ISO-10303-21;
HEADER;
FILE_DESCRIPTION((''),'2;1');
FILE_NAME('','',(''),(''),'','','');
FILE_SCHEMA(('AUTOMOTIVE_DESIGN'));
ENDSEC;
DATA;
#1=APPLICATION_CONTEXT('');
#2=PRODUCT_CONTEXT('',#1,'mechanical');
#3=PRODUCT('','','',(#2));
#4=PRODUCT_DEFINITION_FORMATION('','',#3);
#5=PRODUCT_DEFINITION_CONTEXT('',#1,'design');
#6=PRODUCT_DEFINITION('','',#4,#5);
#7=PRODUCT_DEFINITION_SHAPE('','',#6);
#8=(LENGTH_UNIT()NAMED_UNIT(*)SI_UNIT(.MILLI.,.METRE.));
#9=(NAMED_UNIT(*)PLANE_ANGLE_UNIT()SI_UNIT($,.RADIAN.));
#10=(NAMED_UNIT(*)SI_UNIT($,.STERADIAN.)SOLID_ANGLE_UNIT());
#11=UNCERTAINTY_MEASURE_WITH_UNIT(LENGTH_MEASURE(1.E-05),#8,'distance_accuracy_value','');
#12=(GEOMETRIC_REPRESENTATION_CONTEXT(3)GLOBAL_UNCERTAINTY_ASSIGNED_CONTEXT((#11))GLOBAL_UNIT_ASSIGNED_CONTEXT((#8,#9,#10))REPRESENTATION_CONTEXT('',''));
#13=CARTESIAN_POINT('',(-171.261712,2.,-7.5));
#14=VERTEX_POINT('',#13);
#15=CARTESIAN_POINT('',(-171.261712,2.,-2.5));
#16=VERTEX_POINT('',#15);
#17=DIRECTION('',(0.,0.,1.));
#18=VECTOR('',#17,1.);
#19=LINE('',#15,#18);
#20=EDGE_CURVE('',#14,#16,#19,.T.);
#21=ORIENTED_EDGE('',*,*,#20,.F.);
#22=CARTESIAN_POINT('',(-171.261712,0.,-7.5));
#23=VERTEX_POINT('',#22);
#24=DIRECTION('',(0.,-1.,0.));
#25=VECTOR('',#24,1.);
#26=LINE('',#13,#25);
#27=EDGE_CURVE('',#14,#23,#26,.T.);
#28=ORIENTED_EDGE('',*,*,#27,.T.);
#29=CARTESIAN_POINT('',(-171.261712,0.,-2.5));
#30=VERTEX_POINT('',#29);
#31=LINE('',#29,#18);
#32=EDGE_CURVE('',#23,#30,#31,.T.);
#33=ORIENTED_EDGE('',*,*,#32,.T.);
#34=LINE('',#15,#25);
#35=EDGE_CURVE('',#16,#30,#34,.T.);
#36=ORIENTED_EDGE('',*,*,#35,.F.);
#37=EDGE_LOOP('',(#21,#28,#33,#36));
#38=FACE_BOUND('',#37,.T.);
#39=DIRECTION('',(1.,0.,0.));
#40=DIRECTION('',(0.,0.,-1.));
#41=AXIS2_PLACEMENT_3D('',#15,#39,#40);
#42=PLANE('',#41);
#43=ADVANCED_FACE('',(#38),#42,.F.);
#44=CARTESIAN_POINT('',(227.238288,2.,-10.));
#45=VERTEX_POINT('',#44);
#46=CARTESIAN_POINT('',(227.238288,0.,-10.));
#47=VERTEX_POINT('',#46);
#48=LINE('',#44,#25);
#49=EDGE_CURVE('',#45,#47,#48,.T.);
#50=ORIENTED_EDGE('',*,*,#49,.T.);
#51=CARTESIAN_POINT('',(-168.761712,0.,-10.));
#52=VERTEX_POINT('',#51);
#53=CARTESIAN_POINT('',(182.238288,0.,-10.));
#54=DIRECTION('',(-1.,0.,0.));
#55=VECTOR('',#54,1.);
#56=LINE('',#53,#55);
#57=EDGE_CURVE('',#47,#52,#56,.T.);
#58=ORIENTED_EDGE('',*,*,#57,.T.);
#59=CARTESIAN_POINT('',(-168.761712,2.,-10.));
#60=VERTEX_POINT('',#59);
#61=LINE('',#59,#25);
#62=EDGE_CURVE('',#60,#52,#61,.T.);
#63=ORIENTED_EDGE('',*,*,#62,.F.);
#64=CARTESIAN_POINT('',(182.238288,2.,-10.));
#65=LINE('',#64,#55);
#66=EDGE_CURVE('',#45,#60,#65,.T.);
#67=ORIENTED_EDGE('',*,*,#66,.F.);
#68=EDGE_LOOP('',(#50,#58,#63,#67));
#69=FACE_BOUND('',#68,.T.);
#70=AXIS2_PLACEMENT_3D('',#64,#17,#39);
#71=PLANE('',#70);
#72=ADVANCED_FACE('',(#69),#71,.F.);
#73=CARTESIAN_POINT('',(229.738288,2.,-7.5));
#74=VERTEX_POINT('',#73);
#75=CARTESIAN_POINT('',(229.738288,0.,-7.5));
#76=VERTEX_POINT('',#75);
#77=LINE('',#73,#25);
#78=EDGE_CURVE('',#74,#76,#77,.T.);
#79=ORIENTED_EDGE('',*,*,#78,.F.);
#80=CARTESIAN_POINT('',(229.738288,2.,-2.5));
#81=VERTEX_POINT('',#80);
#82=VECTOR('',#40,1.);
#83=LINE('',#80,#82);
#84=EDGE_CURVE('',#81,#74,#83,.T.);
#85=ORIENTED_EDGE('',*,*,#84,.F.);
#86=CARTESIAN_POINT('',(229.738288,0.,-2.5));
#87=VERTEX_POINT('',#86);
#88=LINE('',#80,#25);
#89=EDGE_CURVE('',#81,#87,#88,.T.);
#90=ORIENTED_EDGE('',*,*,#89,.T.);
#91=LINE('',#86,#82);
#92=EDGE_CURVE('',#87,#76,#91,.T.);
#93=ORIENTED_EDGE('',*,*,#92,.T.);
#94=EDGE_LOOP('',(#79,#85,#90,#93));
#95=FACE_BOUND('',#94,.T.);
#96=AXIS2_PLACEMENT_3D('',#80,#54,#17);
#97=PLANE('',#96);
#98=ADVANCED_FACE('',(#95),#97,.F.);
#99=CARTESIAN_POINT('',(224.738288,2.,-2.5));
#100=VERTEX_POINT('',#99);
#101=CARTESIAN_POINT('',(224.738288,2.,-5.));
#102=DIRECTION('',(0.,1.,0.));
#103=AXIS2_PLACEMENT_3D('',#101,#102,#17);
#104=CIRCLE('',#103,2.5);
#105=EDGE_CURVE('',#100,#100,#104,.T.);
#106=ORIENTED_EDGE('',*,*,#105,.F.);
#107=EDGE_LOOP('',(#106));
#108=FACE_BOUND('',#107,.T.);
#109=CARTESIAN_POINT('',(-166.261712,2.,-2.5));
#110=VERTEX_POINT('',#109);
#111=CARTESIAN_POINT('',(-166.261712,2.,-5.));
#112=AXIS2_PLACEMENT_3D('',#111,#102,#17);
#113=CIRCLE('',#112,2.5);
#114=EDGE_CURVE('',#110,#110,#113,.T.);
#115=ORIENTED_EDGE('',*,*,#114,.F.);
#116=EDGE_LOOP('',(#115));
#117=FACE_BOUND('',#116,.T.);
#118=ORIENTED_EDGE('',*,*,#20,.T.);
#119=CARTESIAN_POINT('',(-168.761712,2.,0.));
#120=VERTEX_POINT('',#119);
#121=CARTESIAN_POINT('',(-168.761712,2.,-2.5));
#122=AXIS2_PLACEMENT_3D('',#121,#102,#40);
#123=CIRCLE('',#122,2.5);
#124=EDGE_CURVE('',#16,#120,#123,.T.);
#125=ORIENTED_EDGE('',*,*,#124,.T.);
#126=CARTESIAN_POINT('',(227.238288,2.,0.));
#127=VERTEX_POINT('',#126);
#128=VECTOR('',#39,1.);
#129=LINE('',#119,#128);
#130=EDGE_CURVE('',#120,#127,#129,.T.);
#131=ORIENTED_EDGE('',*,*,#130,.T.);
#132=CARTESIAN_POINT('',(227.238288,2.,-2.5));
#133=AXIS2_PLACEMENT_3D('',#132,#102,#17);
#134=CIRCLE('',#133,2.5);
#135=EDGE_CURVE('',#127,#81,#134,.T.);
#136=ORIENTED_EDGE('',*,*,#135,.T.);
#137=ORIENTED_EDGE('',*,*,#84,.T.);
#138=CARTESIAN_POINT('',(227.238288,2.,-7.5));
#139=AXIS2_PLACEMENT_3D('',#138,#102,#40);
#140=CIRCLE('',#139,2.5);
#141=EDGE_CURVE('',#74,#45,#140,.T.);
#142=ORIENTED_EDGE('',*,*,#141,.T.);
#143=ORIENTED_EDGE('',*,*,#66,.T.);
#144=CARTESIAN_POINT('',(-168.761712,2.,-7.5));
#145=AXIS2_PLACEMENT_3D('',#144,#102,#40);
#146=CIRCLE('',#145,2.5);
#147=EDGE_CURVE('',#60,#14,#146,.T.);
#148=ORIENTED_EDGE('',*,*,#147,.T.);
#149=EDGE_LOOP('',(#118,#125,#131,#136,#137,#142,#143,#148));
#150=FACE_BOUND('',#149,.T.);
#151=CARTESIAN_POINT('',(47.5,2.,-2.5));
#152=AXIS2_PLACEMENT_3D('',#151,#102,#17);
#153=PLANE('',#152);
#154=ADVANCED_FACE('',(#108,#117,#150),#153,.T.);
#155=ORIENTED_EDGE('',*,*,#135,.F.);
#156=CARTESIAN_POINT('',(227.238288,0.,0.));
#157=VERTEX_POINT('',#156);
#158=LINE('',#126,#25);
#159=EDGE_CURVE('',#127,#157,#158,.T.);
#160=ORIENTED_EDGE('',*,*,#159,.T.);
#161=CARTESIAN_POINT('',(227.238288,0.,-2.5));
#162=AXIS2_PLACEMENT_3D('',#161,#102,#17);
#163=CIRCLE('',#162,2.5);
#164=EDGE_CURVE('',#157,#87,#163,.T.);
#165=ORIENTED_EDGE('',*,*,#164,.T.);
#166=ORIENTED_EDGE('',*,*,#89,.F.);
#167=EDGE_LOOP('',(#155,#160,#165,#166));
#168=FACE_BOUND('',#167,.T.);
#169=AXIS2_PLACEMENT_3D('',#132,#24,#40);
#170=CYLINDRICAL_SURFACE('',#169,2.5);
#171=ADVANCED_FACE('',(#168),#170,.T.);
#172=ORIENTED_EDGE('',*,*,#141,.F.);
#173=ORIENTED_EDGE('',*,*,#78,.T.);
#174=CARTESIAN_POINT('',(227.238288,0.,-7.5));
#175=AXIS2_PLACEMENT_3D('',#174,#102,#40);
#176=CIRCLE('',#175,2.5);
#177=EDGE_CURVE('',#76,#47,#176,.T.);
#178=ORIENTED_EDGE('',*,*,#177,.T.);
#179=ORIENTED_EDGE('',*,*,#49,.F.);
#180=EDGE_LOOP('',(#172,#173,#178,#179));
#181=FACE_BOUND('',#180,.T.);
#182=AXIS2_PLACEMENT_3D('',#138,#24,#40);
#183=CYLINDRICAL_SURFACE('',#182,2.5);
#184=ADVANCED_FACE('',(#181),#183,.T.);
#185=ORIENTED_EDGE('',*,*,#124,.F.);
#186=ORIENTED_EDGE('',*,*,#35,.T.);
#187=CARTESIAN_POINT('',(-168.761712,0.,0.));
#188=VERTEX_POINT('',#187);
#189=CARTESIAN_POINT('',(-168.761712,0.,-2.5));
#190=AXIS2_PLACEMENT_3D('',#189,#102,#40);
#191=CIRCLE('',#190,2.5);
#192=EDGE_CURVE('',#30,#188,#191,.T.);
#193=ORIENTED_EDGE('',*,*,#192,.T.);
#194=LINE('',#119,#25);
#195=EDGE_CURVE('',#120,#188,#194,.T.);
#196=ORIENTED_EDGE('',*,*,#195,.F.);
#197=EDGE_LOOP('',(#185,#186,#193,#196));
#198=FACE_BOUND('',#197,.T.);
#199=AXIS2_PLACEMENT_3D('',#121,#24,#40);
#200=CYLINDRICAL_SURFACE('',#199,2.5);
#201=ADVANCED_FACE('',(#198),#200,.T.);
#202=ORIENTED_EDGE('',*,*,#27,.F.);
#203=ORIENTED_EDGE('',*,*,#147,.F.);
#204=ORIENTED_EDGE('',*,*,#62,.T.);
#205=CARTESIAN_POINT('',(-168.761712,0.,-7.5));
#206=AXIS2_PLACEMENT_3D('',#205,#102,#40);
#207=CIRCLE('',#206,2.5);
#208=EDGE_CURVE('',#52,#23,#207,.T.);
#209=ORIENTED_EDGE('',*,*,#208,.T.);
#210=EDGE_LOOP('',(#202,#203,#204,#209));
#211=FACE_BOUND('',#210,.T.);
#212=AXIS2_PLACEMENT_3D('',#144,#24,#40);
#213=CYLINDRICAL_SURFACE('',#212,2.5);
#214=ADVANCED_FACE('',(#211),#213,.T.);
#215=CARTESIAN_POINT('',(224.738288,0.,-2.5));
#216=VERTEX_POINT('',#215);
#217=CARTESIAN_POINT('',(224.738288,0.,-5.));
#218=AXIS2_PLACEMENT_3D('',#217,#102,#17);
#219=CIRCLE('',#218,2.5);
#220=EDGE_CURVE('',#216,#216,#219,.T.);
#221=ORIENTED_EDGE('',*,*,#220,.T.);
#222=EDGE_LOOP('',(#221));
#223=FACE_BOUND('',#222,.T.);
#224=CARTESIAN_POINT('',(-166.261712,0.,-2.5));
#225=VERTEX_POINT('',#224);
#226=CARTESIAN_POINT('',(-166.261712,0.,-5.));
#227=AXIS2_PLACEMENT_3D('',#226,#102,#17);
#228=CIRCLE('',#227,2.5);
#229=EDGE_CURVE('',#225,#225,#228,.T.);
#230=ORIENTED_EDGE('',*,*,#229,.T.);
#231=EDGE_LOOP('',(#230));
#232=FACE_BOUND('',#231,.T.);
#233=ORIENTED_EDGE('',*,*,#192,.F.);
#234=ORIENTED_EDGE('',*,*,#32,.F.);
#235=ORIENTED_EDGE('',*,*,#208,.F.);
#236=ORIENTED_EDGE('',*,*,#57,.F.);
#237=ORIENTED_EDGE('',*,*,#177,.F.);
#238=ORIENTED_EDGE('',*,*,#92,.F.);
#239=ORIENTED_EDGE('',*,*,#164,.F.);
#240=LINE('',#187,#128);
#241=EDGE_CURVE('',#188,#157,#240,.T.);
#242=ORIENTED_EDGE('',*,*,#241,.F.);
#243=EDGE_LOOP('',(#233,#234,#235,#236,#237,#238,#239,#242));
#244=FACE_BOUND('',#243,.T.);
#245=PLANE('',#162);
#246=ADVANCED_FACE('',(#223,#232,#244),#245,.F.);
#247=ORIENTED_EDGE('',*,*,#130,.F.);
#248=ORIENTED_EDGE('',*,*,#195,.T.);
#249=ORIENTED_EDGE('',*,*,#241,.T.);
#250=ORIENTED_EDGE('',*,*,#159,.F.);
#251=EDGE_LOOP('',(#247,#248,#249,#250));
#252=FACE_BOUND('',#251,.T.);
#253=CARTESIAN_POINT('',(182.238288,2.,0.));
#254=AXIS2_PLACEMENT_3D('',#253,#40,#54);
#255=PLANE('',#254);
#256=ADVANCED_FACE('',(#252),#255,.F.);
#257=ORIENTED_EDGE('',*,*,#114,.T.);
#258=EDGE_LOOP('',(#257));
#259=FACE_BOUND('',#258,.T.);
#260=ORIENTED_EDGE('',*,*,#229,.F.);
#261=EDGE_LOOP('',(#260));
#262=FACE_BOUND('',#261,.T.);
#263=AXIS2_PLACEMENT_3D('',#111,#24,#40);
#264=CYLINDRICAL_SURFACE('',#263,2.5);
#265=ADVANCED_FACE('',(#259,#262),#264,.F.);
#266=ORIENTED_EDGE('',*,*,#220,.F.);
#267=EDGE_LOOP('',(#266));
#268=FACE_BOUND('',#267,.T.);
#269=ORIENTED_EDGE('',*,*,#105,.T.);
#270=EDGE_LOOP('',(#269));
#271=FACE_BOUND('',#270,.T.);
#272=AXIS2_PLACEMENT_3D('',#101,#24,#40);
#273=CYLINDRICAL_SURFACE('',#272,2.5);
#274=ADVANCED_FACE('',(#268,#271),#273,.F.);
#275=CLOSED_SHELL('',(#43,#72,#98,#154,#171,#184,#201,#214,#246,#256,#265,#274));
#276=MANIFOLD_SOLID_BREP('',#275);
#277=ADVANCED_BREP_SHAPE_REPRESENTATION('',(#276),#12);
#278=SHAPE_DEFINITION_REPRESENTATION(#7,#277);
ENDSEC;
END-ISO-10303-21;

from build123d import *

# Parameters (mm, degrees)
SKETCH1_R           = 2.5
BOSS_EXTRUDE2_DEPTH = 2
FLEX1_OUTLINE_R     = 2.5
FLEX1_DEPTH         = 2


# Read off the part's stored shape, not the designer's step: Flex1
with BuildPart() as part:
    # Sketch1 → Boss-Extrude2 (new body)
    with BuildSketch(Plane(origin=(0, 0, 0), x_dir=(1, 0, 0), z_dir=(0, 1, 0))):
        with BuildLine():
            Line((2.5, 0), (47.5, 0))
            ThreePointArc((47.5, 0), (49.267766953, 0.732233047), (50, 2.5))
            Line((50, 2.5), (50, 7.5))
            ThreePointArc((50, 7.5), (49.267766953, 9.267766953), (47.5, 10))
            Line((47.5, 10), (2.5, 10))
            ThreePointArc((2.5, 10), (0.732233047, 9.267766953), (0, 7.5))
            Line((0, 7.5), (0, 2.5))
            ThreePointArc((0, 2.5), (0.732233047, 0.732233047), (2.5, 0))
        make_face()
        with Locations(Location((5, 5, 0), (0, 0, 270))):
            Circle(SKETCH1_R, mode=Mode.SUBTRACT)
        with Locations(Location((45, 5, 0), (0, 0, 270))):
            Circle(SKETCH1_R, mode=Mode.SUBTRACT)
    extrude(amount=BOSS_EXTRUDE2_DEPTH)

    # Flex1 outline → Flex1 (add)
    # profile 1 of 4: a face of its own
    with BuildSketch(Plane(origin=(0, 0, 0), x_dir=(1, 0, 0), z_dir=(0, 1, 0))):
        with BuildLine():
            Line((2.5, 10), (-168.76171244, 10))
            ThreePointArc((-168.76171244, 10), (-170.529479393, 9.267766953), (-171.26171244, 7.5))
            Line((-171.26171244, 7.5), (-171.26171244, 2.5))
            ThreePointArc((-171.26171244, 2.5), (-170.529479393, 0.732233047), (-168.76171244, 0))
            Line((-168.76171244, 0), (2.5, 0))
            ThreePointArc((2.5, 0), (0.732233047, 0.732233047), (0, 2.5))
            Line((0, 2.5), (0, 7.5))
            ThreePointArc((0, 7.5), (0.732233047, 9.267766953), (2.5, 10))
        make_face()
        with Locations((-166.26171244, 5)):
            Circle(FLEX1_OUTLINE_R, mode=Mode.SUBTRACT)
    # profile 2 of 4: a face of its own
    with BuildSketch(Plane(origin=(0, 0, 0), x_dir=(1, 0, 0), z_dir=(0, 1, 0))):
        with BuildLine():
            Line((227.23828756, 10), (47.5, 10))
            ThreePointArc((47.5, 10), (49.267766953, 9.267766953), (50, 7.5))
            Line((50, 7.5), (50, 2.5))
            ThreePointArc((50, 2.5), (49.267766953, 0.732233047), (47.5, 0))
            Line((47.5, 0), (227.23828756, 0))
            ThreePointArc((227.23828756, 0), (229.006054513, 0.732233047), (229.73828756, 2.5))
            Line((229.73828756, 2.5), (229.73828756, 7.5))
            ThreePointArc((229.73828756, 7.5), (229.006054513, 9.267766953), (227.23828756, 10))
        make_face()
        with Locations((224.73828756, 5)):
            Circle(FLEX1_OUTLINE_R, mode=Mode.SUBTRACT)
    # profile 3 of 4: a face of its own
    with BuildSketch(Plane(origin=(0, 0, 0), x_dir=(1, 0, 0), z_dir=(0, 1, 0))):
        with Locations((5, 5)):
            Circle(FLEX1_OUTLINE_R)
    # profile 4 of 4: a face of its own
    with BuildSketch(Plane(origin=(0, 0, 0), x_dir=(1, 0, 0), z_dir=(0, 1, 0))):
        with Locations((45, 5)):
            Circle(FLEX1_OUTLINE_R)
    extrude(amount=FLEX1_DEPTH)


solid = part.part
